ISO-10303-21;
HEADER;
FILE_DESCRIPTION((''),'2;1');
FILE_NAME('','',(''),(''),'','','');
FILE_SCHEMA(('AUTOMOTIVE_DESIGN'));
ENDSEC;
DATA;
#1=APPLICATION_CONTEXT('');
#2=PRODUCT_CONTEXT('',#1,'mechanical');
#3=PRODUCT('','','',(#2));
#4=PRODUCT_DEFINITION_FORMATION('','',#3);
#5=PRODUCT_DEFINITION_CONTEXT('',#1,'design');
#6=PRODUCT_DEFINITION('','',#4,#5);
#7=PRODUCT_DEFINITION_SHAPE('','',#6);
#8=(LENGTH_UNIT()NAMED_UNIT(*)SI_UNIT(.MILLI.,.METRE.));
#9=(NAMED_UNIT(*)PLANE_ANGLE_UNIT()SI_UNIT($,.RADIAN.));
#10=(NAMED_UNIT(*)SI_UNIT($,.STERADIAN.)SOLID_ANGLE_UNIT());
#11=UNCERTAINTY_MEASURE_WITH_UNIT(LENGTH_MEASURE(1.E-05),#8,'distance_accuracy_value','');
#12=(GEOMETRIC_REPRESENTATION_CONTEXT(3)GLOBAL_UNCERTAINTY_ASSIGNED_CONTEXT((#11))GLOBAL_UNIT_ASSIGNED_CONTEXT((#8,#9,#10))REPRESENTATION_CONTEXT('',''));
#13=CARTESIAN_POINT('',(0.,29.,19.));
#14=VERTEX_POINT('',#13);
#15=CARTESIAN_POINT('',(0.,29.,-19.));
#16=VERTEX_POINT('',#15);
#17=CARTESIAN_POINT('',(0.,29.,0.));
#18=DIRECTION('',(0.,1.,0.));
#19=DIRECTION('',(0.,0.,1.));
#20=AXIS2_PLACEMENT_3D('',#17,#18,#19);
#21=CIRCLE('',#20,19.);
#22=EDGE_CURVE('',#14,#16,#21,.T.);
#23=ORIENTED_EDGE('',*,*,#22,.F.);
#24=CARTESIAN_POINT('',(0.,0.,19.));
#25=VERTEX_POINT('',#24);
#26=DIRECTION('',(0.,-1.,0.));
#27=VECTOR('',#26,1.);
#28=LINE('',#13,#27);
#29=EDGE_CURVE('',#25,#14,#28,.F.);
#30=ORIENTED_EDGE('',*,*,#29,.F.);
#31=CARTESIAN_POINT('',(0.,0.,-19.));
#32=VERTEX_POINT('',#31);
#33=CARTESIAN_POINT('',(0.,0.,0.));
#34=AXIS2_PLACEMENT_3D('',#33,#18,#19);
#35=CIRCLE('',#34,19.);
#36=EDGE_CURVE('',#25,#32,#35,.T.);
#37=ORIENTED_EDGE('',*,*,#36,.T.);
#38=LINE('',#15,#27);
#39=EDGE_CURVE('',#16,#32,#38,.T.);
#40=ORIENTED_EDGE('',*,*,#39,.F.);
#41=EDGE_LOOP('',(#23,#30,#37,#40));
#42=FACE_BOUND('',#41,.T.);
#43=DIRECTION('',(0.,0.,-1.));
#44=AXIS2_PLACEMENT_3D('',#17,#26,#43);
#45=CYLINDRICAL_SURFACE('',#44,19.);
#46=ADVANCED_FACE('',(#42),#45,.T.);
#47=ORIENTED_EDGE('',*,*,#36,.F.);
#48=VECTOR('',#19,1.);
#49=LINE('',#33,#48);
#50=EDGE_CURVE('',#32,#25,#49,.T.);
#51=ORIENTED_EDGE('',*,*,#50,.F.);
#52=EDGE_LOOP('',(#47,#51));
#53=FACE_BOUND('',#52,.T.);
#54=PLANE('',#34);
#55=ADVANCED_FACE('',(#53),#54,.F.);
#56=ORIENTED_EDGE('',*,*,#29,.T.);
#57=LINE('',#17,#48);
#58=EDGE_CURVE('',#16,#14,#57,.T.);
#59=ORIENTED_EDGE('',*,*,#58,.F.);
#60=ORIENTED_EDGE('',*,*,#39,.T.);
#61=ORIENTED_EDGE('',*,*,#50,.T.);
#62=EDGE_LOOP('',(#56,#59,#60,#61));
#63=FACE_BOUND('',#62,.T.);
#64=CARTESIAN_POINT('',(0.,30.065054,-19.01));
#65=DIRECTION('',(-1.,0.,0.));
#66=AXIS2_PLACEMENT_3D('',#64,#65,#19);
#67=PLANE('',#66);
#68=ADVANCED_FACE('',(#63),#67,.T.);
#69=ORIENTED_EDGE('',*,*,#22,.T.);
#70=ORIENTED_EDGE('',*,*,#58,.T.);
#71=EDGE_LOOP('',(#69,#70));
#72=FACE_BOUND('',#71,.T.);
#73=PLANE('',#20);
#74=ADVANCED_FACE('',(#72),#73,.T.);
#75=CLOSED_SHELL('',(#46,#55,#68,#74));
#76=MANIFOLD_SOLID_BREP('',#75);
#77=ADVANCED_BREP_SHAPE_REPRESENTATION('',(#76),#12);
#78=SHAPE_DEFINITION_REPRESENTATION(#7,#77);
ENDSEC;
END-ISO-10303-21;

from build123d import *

# Parameters (mm, degrees)
SKETCH1_R                = 19
BOSS_EXTRUDE1_DEPTH      = 29
SPLIT1_SURFACE_1_BACK    = 62.066
SPLIT1_SURFACE_1_DEPTH   = 124.132
SPLIT1_SURFACE_2_BACK    = 62.066
SPLIT1_SURFACE_2_DEPTH   = 124.132
BODY_DELETE_KEEP_1_DEPTH = 29


# Read off the part's stored shape, not the designer's step: Body-Delete/Keep 1
with BuildPart() as part:
    # Sketch1 → Boss-Extrude1 (new body)
    with BuildSketch(Plane(origin=(0, 0, 0), x_dir=(1, 0, 0), z_dir=(0, 1, 0))):
        with Locations(Location((0, 0, 0), (0, 0, 270))):
            Circle(SKETCH1_R)
    extrude(amount=BOSS_EXTRUDE1_DEPTH)


with BuildPart() as body_2:
    # Split1: the piece behind the surface
    add(part.part)
    # Split1 surface: a surface, the sketch's curves swept straight by 124.132 mm
    with BuildLine(Plane.XY.offset(-SPLIT1_SURFACE_1_BACK), mode=Mode.PRIVATE) as split1_surface_1_path:
        Line((0, 30.065054412), (0, -0.518911578))
    split1_surface_1 = Shell.extrude(split1_surface_1_path.wire(), (0 * SPLIT1_SURFACE_1_DEPTH, 0 * SPLIT1_SURFACE_1_DEPTH, 1 * SPLIT1_SURFACE_1_DEPTH))
    split(bisect_by=split1_surface_1, keep=Keep.BOTTOM)

    # Body-Delete/Keep 1 outline → Body-Delete/Keep 1 (cut)
    with BuildSketch(Plane(origin=(0, 0, 0), x_dir=(1, 0, 0), z_dir=(0, 1, 0))):
        with BuildLine():
            ThreePointArc((0, 19), (-19, 0), (0, -19))
            Line((0, -19), (0, 19))
        make_face()
    extrude(amount=BODY_DELETE_KEEP_1_DEPTH, mode=Mode.SUBTRACT)


with BuildPart() as part_1:
    add(part.part)

    # Split1: split by a surface, the side it looks to stays
    # Split1 surface: a surface, the sketch's curves swept straight by 124.132 mm
    with BuildLine(Plane.XY.offset(-SPLIT1_SURFACE_2_BACK), mode=Mode.PRIVATE) as split1_surface_2_path:
        Line((0, 30.065054412), (0, -0.518911578))
    split1_surface_2 = Shell.extrude(split1_surface_2_path.wire(), (0 * SPLIT1_SURFACE_2_DEPTH, 0 * SPLIT1_SURFACE_2_DEPTH, 1 * SPLIT1_SURFACE_2_DEPTH))
    split(bisect_by=split1_surface_2, keep=Keep.TOP)


solid = part_1.part
